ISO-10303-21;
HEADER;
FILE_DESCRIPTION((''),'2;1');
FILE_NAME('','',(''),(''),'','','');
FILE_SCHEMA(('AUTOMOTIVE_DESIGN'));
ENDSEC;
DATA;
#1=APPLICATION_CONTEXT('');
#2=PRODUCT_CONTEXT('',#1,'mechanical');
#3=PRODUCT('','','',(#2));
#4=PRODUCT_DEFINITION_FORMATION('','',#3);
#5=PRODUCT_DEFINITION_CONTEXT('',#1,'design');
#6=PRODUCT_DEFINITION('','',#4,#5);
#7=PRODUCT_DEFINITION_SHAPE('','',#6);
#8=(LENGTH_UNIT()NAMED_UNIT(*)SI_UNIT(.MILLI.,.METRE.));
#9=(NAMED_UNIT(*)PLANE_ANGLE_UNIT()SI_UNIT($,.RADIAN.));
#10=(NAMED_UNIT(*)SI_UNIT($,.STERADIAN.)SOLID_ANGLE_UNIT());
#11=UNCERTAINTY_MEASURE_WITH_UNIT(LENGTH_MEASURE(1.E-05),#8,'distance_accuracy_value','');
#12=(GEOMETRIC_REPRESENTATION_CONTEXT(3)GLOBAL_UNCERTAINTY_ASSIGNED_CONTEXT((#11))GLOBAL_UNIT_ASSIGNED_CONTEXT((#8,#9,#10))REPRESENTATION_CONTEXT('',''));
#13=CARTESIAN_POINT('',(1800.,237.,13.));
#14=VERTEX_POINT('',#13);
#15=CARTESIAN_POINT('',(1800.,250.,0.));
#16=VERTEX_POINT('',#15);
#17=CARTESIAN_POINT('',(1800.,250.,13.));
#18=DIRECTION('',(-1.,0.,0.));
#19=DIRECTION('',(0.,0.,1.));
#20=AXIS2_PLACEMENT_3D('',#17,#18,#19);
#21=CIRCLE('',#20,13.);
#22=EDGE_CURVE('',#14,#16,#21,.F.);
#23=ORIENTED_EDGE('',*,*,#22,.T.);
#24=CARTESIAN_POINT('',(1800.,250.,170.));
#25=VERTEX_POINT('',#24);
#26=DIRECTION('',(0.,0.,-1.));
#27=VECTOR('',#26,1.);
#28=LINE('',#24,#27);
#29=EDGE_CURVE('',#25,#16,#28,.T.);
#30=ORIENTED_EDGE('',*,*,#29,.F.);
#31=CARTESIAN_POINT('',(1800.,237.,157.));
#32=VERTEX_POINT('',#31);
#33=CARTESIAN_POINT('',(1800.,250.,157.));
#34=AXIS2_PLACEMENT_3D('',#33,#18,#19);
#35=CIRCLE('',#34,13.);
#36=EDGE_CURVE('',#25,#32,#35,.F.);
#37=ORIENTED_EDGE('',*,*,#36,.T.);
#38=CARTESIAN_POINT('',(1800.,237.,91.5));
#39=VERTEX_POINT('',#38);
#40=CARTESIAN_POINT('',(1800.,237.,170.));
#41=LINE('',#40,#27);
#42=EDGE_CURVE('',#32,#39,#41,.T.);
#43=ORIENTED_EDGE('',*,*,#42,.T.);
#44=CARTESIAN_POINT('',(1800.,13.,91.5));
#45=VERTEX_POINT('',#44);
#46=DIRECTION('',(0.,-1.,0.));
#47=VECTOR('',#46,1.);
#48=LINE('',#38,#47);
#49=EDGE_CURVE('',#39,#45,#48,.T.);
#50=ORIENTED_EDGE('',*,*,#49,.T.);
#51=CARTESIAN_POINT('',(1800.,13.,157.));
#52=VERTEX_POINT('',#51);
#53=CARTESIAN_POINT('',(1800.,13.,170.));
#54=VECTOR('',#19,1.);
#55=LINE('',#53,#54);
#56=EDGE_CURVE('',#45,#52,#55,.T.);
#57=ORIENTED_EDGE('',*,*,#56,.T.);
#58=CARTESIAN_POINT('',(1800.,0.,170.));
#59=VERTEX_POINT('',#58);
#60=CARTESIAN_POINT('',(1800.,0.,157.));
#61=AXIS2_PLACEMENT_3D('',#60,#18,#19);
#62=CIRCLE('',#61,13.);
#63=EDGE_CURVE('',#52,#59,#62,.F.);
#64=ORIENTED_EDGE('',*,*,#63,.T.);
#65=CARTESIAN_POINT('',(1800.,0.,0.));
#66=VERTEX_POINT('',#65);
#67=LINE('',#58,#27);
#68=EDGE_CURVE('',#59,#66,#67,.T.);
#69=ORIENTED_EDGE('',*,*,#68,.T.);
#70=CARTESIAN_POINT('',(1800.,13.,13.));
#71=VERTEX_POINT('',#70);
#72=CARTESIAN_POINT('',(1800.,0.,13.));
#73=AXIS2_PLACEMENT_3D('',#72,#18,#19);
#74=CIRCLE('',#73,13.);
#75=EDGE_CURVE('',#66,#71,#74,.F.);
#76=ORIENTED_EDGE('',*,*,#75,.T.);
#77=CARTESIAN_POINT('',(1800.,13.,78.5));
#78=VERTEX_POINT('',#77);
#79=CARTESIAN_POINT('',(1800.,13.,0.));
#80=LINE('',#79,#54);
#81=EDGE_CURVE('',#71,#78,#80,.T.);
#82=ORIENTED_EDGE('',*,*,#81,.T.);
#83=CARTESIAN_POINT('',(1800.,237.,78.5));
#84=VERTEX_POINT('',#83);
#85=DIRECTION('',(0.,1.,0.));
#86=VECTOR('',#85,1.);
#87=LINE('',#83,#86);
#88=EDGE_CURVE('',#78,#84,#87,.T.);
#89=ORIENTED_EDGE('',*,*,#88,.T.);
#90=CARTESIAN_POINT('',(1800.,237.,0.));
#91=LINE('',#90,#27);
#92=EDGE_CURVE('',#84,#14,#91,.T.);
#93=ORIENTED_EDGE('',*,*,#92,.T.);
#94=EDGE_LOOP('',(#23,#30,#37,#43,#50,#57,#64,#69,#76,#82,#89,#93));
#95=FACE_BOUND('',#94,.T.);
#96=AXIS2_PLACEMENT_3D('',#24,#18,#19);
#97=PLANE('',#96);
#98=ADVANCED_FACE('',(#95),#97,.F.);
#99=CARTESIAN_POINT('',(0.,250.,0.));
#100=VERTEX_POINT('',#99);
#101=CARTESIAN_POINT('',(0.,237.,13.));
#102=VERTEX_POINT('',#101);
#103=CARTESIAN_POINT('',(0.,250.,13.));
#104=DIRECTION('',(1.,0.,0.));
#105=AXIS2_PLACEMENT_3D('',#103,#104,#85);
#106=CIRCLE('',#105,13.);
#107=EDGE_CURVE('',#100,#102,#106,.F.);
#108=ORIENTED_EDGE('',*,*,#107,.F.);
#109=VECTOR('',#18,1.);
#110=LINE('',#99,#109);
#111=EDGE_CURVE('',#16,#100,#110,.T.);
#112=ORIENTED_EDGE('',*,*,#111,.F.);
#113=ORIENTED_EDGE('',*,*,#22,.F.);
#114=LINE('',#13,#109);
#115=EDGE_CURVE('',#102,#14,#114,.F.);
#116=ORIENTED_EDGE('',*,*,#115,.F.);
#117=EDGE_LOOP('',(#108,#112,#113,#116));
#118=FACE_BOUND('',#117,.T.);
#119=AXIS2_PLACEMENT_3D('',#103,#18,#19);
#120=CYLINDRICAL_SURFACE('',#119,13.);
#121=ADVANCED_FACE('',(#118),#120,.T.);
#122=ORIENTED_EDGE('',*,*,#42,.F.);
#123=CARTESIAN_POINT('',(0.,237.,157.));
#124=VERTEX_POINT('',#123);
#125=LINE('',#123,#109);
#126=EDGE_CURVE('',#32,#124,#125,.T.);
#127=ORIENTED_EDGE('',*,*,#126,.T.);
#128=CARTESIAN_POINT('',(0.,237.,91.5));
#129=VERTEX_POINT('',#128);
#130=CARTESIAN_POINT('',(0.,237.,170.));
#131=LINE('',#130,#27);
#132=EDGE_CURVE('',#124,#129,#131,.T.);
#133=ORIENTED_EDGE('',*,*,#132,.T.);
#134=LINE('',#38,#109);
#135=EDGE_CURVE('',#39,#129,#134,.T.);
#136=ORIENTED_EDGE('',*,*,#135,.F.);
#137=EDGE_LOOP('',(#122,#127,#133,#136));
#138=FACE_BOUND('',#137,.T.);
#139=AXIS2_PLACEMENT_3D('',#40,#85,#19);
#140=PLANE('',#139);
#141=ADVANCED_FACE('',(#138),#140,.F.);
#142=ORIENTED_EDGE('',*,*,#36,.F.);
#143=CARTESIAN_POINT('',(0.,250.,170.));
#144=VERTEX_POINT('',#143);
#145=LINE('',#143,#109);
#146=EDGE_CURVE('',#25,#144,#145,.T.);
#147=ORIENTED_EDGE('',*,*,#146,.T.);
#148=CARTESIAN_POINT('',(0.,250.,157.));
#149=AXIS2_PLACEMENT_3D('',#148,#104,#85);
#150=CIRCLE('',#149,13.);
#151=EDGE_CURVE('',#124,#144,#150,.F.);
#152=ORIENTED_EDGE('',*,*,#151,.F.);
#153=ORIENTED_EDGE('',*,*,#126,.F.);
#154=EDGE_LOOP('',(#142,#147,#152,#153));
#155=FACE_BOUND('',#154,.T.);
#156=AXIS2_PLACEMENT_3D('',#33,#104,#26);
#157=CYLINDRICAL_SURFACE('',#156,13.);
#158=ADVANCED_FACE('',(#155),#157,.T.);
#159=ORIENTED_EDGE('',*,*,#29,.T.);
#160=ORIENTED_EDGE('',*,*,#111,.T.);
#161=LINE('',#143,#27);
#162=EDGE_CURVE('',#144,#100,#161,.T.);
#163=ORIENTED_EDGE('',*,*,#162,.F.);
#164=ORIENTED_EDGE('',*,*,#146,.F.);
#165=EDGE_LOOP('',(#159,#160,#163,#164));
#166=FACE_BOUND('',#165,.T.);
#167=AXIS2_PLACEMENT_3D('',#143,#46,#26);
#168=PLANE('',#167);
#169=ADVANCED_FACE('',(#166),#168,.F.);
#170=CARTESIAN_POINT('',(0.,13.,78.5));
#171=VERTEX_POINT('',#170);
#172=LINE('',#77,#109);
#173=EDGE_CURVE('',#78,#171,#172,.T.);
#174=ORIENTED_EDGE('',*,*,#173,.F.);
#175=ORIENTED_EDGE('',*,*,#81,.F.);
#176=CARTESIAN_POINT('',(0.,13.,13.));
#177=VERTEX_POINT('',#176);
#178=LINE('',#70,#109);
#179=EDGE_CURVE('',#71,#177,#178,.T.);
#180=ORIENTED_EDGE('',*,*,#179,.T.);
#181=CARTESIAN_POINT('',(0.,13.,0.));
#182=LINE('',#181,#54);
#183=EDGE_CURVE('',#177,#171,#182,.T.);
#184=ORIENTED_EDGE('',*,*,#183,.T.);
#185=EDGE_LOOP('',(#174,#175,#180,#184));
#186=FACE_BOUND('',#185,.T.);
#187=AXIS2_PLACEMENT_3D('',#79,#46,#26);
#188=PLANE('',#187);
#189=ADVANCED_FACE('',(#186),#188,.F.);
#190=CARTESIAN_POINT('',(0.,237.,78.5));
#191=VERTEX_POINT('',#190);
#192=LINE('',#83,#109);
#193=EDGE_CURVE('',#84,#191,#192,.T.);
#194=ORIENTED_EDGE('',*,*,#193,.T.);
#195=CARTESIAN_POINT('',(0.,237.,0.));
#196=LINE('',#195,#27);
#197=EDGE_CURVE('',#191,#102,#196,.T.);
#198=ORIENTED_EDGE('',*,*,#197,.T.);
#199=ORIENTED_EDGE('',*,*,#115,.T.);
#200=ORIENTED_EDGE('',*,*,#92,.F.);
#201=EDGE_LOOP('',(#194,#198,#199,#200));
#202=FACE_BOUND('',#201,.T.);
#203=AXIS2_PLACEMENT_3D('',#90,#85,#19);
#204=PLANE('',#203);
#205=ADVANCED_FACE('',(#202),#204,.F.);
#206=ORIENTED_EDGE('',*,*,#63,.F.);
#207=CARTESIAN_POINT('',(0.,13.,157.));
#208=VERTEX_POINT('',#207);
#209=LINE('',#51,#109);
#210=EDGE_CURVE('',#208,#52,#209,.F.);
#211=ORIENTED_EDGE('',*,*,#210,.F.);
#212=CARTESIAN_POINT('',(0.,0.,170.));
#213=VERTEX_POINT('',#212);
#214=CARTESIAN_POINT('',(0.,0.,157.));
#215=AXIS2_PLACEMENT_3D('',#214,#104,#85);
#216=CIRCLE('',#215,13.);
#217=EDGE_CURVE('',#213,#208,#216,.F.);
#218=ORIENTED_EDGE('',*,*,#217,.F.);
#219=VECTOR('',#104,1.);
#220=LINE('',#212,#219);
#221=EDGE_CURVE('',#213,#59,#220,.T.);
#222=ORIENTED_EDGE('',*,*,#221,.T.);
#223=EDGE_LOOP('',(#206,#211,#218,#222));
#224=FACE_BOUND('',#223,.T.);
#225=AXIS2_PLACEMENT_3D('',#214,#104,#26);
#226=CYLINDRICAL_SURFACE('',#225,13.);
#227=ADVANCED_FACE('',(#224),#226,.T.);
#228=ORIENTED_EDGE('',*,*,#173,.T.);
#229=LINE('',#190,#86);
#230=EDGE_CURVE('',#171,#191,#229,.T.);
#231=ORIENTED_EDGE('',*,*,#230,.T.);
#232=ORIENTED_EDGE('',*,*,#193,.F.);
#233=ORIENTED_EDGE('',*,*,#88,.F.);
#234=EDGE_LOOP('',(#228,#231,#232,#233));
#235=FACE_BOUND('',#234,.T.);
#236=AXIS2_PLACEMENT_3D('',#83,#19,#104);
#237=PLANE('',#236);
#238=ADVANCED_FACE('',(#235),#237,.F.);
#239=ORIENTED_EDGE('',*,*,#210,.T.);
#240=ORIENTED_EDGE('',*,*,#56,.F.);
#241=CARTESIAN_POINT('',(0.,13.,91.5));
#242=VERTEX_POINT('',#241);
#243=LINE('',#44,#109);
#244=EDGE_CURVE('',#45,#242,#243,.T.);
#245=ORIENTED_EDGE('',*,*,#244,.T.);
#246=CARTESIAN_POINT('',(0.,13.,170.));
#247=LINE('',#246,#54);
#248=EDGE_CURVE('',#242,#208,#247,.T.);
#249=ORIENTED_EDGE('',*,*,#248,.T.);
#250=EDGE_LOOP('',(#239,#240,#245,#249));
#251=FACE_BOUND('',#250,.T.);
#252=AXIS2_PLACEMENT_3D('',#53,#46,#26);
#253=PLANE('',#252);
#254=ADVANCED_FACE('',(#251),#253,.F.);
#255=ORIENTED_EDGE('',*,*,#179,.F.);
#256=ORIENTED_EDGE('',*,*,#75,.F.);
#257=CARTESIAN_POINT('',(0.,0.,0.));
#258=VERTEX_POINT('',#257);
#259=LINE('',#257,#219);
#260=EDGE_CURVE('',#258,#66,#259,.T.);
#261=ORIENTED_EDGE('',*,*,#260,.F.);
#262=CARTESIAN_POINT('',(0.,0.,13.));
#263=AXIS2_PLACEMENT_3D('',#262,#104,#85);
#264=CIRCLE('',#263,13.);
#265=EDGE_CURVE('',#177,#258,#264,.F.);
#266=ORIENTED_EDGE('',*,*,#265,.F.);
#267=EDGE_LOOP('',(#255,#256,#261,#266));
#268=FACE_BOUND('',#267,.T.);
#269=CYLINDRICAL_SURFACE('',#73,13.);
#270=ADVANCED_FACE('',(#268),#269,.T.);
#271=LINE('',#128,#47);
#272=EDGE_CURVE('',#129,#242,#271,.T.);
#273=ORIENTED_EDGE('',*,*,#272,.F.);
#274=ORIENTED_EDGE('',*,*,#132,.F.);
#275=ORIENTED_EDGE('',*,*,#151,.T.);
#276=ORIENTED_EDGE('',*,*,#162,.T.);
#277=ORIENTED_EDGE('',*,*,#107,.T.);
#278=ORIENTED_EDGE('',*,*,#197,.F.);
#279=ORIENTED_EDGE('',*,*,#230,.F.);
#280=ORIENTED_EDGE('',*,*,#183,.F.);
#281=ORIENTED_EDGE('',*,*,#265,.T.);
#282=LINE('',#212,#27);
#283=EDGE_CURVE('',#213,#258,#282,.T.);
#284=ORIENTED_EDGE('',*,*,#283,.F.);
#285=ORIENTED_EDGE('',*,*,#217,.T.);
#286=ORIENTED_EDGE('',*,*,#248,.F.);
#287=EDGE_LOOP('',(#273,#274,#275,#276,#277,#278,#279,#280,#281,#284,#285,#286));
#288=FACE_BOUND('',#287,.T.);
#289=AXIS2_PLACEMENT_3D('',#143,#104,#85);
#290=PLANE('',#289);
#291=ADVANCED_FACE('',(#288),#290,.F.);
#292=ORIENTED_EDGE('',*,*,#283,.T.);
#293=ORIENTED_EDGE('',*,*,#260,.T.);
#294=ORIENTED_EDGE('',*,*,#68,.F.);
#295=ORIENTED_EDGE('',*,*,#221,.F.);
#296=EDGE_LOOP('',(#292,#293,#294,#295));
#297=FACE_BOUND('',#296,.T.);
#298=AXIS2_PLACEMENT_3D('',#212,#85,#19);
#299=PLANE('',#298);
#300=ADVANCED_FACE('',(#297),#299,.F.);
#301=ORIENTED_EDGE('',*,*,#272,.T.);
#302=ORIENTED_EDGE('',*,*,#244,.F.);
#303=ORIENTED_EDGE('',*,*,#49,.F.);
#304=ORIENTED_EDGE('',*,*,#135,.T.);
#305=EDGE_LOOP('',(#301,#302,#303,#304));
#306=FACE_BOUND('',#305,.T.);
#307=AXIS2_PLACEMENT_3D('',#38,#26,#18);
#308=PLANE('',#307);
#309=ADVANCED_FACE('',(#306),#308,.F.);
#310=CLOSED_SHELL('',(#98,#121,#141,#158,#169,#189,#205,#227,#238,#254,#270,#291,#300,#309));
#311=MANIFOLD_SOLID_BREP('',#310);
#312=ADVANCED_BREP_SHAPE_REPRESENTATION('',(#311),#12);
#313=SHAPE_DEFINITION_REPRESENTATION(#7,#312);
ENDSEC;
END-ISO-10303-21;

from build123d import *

# Parameters (mm, degrees)
SKETCH_1_W          = 1800
SKETCH_1_H          = 250
EXTRUDE_1_DEPTH     = 170
SKETCH_4_W          = 78.5
SKETCH_4_H          = 224
CUT_EXTRUDE_4_DEPTH = 1826.212316417
FILLET_1_R          = 13
FILLET_2_R          = 13
FILLET_3_R          = 13
FILLET_4_R          = 13


with BuildPart() as part:
    # 草图1 → 拉伸1 (new body)
    with BuildSketch(Plane.XY):
        with Locations((900, 125)):
            Rectangle(SKETCH_1_W, SKETCH_1_H)
    extrude(amount=EXTRUDE_1_DEPTH)

    # 草图4 → 切除-拉伸4 (cut, through all)
    with BuildSketch(Plane.ZY):
        with Locations((39.25, 125)):
            Rectangle(SKETCH_4_W, SKETCH_4_H)
        with Locations((130.75, 125)):
            Rectangle(SKETCH_4_W, SKETCH_4_H)
    extrude(amount=-CUT_EXTRUDE_4_DEPTH, mode=Mode.SUBTRACT)

    # 圆角1
    fillet_1_edges = [part.edges().sort_by_distance(p)[0] for p in [
        (900, 13, 170),
    ]]
    fillet(fillet_1_edges, radius=FILLET_1_R - 0.0001)  # a hair under: the kernel refuses the full size

    # 圆角2
    fillet_2_edges = [part.edges().sort_by_distance(p)[0] for p in [
        (900, 13, 0),
    ]]
    fillet(fillet_2_edges, radius=FILLET_2_R - 0.0001)  # a hair under: the kernel refuses the full size

    # 圆角3
    fillet_3_edges = [part.edges().sort_by_distance(p)[0] for p in [
        (900, 237, 170),
    ]]
    fillet(fillet_3_edges, radius=FILLET_3_R - 0.0001)  # a hair under: the kernel refuses the full size

    # 圆角4
    fillet_4_edges = [part.edges().sort_by_distance(p)[0] for p in [
        (900, 237, 0),
    ]]
    fillet(fillet_4_edges, radius=FILLET_4_R - 0.0001)  # a hair under: the kernel refuses the full size


solid = part.part
